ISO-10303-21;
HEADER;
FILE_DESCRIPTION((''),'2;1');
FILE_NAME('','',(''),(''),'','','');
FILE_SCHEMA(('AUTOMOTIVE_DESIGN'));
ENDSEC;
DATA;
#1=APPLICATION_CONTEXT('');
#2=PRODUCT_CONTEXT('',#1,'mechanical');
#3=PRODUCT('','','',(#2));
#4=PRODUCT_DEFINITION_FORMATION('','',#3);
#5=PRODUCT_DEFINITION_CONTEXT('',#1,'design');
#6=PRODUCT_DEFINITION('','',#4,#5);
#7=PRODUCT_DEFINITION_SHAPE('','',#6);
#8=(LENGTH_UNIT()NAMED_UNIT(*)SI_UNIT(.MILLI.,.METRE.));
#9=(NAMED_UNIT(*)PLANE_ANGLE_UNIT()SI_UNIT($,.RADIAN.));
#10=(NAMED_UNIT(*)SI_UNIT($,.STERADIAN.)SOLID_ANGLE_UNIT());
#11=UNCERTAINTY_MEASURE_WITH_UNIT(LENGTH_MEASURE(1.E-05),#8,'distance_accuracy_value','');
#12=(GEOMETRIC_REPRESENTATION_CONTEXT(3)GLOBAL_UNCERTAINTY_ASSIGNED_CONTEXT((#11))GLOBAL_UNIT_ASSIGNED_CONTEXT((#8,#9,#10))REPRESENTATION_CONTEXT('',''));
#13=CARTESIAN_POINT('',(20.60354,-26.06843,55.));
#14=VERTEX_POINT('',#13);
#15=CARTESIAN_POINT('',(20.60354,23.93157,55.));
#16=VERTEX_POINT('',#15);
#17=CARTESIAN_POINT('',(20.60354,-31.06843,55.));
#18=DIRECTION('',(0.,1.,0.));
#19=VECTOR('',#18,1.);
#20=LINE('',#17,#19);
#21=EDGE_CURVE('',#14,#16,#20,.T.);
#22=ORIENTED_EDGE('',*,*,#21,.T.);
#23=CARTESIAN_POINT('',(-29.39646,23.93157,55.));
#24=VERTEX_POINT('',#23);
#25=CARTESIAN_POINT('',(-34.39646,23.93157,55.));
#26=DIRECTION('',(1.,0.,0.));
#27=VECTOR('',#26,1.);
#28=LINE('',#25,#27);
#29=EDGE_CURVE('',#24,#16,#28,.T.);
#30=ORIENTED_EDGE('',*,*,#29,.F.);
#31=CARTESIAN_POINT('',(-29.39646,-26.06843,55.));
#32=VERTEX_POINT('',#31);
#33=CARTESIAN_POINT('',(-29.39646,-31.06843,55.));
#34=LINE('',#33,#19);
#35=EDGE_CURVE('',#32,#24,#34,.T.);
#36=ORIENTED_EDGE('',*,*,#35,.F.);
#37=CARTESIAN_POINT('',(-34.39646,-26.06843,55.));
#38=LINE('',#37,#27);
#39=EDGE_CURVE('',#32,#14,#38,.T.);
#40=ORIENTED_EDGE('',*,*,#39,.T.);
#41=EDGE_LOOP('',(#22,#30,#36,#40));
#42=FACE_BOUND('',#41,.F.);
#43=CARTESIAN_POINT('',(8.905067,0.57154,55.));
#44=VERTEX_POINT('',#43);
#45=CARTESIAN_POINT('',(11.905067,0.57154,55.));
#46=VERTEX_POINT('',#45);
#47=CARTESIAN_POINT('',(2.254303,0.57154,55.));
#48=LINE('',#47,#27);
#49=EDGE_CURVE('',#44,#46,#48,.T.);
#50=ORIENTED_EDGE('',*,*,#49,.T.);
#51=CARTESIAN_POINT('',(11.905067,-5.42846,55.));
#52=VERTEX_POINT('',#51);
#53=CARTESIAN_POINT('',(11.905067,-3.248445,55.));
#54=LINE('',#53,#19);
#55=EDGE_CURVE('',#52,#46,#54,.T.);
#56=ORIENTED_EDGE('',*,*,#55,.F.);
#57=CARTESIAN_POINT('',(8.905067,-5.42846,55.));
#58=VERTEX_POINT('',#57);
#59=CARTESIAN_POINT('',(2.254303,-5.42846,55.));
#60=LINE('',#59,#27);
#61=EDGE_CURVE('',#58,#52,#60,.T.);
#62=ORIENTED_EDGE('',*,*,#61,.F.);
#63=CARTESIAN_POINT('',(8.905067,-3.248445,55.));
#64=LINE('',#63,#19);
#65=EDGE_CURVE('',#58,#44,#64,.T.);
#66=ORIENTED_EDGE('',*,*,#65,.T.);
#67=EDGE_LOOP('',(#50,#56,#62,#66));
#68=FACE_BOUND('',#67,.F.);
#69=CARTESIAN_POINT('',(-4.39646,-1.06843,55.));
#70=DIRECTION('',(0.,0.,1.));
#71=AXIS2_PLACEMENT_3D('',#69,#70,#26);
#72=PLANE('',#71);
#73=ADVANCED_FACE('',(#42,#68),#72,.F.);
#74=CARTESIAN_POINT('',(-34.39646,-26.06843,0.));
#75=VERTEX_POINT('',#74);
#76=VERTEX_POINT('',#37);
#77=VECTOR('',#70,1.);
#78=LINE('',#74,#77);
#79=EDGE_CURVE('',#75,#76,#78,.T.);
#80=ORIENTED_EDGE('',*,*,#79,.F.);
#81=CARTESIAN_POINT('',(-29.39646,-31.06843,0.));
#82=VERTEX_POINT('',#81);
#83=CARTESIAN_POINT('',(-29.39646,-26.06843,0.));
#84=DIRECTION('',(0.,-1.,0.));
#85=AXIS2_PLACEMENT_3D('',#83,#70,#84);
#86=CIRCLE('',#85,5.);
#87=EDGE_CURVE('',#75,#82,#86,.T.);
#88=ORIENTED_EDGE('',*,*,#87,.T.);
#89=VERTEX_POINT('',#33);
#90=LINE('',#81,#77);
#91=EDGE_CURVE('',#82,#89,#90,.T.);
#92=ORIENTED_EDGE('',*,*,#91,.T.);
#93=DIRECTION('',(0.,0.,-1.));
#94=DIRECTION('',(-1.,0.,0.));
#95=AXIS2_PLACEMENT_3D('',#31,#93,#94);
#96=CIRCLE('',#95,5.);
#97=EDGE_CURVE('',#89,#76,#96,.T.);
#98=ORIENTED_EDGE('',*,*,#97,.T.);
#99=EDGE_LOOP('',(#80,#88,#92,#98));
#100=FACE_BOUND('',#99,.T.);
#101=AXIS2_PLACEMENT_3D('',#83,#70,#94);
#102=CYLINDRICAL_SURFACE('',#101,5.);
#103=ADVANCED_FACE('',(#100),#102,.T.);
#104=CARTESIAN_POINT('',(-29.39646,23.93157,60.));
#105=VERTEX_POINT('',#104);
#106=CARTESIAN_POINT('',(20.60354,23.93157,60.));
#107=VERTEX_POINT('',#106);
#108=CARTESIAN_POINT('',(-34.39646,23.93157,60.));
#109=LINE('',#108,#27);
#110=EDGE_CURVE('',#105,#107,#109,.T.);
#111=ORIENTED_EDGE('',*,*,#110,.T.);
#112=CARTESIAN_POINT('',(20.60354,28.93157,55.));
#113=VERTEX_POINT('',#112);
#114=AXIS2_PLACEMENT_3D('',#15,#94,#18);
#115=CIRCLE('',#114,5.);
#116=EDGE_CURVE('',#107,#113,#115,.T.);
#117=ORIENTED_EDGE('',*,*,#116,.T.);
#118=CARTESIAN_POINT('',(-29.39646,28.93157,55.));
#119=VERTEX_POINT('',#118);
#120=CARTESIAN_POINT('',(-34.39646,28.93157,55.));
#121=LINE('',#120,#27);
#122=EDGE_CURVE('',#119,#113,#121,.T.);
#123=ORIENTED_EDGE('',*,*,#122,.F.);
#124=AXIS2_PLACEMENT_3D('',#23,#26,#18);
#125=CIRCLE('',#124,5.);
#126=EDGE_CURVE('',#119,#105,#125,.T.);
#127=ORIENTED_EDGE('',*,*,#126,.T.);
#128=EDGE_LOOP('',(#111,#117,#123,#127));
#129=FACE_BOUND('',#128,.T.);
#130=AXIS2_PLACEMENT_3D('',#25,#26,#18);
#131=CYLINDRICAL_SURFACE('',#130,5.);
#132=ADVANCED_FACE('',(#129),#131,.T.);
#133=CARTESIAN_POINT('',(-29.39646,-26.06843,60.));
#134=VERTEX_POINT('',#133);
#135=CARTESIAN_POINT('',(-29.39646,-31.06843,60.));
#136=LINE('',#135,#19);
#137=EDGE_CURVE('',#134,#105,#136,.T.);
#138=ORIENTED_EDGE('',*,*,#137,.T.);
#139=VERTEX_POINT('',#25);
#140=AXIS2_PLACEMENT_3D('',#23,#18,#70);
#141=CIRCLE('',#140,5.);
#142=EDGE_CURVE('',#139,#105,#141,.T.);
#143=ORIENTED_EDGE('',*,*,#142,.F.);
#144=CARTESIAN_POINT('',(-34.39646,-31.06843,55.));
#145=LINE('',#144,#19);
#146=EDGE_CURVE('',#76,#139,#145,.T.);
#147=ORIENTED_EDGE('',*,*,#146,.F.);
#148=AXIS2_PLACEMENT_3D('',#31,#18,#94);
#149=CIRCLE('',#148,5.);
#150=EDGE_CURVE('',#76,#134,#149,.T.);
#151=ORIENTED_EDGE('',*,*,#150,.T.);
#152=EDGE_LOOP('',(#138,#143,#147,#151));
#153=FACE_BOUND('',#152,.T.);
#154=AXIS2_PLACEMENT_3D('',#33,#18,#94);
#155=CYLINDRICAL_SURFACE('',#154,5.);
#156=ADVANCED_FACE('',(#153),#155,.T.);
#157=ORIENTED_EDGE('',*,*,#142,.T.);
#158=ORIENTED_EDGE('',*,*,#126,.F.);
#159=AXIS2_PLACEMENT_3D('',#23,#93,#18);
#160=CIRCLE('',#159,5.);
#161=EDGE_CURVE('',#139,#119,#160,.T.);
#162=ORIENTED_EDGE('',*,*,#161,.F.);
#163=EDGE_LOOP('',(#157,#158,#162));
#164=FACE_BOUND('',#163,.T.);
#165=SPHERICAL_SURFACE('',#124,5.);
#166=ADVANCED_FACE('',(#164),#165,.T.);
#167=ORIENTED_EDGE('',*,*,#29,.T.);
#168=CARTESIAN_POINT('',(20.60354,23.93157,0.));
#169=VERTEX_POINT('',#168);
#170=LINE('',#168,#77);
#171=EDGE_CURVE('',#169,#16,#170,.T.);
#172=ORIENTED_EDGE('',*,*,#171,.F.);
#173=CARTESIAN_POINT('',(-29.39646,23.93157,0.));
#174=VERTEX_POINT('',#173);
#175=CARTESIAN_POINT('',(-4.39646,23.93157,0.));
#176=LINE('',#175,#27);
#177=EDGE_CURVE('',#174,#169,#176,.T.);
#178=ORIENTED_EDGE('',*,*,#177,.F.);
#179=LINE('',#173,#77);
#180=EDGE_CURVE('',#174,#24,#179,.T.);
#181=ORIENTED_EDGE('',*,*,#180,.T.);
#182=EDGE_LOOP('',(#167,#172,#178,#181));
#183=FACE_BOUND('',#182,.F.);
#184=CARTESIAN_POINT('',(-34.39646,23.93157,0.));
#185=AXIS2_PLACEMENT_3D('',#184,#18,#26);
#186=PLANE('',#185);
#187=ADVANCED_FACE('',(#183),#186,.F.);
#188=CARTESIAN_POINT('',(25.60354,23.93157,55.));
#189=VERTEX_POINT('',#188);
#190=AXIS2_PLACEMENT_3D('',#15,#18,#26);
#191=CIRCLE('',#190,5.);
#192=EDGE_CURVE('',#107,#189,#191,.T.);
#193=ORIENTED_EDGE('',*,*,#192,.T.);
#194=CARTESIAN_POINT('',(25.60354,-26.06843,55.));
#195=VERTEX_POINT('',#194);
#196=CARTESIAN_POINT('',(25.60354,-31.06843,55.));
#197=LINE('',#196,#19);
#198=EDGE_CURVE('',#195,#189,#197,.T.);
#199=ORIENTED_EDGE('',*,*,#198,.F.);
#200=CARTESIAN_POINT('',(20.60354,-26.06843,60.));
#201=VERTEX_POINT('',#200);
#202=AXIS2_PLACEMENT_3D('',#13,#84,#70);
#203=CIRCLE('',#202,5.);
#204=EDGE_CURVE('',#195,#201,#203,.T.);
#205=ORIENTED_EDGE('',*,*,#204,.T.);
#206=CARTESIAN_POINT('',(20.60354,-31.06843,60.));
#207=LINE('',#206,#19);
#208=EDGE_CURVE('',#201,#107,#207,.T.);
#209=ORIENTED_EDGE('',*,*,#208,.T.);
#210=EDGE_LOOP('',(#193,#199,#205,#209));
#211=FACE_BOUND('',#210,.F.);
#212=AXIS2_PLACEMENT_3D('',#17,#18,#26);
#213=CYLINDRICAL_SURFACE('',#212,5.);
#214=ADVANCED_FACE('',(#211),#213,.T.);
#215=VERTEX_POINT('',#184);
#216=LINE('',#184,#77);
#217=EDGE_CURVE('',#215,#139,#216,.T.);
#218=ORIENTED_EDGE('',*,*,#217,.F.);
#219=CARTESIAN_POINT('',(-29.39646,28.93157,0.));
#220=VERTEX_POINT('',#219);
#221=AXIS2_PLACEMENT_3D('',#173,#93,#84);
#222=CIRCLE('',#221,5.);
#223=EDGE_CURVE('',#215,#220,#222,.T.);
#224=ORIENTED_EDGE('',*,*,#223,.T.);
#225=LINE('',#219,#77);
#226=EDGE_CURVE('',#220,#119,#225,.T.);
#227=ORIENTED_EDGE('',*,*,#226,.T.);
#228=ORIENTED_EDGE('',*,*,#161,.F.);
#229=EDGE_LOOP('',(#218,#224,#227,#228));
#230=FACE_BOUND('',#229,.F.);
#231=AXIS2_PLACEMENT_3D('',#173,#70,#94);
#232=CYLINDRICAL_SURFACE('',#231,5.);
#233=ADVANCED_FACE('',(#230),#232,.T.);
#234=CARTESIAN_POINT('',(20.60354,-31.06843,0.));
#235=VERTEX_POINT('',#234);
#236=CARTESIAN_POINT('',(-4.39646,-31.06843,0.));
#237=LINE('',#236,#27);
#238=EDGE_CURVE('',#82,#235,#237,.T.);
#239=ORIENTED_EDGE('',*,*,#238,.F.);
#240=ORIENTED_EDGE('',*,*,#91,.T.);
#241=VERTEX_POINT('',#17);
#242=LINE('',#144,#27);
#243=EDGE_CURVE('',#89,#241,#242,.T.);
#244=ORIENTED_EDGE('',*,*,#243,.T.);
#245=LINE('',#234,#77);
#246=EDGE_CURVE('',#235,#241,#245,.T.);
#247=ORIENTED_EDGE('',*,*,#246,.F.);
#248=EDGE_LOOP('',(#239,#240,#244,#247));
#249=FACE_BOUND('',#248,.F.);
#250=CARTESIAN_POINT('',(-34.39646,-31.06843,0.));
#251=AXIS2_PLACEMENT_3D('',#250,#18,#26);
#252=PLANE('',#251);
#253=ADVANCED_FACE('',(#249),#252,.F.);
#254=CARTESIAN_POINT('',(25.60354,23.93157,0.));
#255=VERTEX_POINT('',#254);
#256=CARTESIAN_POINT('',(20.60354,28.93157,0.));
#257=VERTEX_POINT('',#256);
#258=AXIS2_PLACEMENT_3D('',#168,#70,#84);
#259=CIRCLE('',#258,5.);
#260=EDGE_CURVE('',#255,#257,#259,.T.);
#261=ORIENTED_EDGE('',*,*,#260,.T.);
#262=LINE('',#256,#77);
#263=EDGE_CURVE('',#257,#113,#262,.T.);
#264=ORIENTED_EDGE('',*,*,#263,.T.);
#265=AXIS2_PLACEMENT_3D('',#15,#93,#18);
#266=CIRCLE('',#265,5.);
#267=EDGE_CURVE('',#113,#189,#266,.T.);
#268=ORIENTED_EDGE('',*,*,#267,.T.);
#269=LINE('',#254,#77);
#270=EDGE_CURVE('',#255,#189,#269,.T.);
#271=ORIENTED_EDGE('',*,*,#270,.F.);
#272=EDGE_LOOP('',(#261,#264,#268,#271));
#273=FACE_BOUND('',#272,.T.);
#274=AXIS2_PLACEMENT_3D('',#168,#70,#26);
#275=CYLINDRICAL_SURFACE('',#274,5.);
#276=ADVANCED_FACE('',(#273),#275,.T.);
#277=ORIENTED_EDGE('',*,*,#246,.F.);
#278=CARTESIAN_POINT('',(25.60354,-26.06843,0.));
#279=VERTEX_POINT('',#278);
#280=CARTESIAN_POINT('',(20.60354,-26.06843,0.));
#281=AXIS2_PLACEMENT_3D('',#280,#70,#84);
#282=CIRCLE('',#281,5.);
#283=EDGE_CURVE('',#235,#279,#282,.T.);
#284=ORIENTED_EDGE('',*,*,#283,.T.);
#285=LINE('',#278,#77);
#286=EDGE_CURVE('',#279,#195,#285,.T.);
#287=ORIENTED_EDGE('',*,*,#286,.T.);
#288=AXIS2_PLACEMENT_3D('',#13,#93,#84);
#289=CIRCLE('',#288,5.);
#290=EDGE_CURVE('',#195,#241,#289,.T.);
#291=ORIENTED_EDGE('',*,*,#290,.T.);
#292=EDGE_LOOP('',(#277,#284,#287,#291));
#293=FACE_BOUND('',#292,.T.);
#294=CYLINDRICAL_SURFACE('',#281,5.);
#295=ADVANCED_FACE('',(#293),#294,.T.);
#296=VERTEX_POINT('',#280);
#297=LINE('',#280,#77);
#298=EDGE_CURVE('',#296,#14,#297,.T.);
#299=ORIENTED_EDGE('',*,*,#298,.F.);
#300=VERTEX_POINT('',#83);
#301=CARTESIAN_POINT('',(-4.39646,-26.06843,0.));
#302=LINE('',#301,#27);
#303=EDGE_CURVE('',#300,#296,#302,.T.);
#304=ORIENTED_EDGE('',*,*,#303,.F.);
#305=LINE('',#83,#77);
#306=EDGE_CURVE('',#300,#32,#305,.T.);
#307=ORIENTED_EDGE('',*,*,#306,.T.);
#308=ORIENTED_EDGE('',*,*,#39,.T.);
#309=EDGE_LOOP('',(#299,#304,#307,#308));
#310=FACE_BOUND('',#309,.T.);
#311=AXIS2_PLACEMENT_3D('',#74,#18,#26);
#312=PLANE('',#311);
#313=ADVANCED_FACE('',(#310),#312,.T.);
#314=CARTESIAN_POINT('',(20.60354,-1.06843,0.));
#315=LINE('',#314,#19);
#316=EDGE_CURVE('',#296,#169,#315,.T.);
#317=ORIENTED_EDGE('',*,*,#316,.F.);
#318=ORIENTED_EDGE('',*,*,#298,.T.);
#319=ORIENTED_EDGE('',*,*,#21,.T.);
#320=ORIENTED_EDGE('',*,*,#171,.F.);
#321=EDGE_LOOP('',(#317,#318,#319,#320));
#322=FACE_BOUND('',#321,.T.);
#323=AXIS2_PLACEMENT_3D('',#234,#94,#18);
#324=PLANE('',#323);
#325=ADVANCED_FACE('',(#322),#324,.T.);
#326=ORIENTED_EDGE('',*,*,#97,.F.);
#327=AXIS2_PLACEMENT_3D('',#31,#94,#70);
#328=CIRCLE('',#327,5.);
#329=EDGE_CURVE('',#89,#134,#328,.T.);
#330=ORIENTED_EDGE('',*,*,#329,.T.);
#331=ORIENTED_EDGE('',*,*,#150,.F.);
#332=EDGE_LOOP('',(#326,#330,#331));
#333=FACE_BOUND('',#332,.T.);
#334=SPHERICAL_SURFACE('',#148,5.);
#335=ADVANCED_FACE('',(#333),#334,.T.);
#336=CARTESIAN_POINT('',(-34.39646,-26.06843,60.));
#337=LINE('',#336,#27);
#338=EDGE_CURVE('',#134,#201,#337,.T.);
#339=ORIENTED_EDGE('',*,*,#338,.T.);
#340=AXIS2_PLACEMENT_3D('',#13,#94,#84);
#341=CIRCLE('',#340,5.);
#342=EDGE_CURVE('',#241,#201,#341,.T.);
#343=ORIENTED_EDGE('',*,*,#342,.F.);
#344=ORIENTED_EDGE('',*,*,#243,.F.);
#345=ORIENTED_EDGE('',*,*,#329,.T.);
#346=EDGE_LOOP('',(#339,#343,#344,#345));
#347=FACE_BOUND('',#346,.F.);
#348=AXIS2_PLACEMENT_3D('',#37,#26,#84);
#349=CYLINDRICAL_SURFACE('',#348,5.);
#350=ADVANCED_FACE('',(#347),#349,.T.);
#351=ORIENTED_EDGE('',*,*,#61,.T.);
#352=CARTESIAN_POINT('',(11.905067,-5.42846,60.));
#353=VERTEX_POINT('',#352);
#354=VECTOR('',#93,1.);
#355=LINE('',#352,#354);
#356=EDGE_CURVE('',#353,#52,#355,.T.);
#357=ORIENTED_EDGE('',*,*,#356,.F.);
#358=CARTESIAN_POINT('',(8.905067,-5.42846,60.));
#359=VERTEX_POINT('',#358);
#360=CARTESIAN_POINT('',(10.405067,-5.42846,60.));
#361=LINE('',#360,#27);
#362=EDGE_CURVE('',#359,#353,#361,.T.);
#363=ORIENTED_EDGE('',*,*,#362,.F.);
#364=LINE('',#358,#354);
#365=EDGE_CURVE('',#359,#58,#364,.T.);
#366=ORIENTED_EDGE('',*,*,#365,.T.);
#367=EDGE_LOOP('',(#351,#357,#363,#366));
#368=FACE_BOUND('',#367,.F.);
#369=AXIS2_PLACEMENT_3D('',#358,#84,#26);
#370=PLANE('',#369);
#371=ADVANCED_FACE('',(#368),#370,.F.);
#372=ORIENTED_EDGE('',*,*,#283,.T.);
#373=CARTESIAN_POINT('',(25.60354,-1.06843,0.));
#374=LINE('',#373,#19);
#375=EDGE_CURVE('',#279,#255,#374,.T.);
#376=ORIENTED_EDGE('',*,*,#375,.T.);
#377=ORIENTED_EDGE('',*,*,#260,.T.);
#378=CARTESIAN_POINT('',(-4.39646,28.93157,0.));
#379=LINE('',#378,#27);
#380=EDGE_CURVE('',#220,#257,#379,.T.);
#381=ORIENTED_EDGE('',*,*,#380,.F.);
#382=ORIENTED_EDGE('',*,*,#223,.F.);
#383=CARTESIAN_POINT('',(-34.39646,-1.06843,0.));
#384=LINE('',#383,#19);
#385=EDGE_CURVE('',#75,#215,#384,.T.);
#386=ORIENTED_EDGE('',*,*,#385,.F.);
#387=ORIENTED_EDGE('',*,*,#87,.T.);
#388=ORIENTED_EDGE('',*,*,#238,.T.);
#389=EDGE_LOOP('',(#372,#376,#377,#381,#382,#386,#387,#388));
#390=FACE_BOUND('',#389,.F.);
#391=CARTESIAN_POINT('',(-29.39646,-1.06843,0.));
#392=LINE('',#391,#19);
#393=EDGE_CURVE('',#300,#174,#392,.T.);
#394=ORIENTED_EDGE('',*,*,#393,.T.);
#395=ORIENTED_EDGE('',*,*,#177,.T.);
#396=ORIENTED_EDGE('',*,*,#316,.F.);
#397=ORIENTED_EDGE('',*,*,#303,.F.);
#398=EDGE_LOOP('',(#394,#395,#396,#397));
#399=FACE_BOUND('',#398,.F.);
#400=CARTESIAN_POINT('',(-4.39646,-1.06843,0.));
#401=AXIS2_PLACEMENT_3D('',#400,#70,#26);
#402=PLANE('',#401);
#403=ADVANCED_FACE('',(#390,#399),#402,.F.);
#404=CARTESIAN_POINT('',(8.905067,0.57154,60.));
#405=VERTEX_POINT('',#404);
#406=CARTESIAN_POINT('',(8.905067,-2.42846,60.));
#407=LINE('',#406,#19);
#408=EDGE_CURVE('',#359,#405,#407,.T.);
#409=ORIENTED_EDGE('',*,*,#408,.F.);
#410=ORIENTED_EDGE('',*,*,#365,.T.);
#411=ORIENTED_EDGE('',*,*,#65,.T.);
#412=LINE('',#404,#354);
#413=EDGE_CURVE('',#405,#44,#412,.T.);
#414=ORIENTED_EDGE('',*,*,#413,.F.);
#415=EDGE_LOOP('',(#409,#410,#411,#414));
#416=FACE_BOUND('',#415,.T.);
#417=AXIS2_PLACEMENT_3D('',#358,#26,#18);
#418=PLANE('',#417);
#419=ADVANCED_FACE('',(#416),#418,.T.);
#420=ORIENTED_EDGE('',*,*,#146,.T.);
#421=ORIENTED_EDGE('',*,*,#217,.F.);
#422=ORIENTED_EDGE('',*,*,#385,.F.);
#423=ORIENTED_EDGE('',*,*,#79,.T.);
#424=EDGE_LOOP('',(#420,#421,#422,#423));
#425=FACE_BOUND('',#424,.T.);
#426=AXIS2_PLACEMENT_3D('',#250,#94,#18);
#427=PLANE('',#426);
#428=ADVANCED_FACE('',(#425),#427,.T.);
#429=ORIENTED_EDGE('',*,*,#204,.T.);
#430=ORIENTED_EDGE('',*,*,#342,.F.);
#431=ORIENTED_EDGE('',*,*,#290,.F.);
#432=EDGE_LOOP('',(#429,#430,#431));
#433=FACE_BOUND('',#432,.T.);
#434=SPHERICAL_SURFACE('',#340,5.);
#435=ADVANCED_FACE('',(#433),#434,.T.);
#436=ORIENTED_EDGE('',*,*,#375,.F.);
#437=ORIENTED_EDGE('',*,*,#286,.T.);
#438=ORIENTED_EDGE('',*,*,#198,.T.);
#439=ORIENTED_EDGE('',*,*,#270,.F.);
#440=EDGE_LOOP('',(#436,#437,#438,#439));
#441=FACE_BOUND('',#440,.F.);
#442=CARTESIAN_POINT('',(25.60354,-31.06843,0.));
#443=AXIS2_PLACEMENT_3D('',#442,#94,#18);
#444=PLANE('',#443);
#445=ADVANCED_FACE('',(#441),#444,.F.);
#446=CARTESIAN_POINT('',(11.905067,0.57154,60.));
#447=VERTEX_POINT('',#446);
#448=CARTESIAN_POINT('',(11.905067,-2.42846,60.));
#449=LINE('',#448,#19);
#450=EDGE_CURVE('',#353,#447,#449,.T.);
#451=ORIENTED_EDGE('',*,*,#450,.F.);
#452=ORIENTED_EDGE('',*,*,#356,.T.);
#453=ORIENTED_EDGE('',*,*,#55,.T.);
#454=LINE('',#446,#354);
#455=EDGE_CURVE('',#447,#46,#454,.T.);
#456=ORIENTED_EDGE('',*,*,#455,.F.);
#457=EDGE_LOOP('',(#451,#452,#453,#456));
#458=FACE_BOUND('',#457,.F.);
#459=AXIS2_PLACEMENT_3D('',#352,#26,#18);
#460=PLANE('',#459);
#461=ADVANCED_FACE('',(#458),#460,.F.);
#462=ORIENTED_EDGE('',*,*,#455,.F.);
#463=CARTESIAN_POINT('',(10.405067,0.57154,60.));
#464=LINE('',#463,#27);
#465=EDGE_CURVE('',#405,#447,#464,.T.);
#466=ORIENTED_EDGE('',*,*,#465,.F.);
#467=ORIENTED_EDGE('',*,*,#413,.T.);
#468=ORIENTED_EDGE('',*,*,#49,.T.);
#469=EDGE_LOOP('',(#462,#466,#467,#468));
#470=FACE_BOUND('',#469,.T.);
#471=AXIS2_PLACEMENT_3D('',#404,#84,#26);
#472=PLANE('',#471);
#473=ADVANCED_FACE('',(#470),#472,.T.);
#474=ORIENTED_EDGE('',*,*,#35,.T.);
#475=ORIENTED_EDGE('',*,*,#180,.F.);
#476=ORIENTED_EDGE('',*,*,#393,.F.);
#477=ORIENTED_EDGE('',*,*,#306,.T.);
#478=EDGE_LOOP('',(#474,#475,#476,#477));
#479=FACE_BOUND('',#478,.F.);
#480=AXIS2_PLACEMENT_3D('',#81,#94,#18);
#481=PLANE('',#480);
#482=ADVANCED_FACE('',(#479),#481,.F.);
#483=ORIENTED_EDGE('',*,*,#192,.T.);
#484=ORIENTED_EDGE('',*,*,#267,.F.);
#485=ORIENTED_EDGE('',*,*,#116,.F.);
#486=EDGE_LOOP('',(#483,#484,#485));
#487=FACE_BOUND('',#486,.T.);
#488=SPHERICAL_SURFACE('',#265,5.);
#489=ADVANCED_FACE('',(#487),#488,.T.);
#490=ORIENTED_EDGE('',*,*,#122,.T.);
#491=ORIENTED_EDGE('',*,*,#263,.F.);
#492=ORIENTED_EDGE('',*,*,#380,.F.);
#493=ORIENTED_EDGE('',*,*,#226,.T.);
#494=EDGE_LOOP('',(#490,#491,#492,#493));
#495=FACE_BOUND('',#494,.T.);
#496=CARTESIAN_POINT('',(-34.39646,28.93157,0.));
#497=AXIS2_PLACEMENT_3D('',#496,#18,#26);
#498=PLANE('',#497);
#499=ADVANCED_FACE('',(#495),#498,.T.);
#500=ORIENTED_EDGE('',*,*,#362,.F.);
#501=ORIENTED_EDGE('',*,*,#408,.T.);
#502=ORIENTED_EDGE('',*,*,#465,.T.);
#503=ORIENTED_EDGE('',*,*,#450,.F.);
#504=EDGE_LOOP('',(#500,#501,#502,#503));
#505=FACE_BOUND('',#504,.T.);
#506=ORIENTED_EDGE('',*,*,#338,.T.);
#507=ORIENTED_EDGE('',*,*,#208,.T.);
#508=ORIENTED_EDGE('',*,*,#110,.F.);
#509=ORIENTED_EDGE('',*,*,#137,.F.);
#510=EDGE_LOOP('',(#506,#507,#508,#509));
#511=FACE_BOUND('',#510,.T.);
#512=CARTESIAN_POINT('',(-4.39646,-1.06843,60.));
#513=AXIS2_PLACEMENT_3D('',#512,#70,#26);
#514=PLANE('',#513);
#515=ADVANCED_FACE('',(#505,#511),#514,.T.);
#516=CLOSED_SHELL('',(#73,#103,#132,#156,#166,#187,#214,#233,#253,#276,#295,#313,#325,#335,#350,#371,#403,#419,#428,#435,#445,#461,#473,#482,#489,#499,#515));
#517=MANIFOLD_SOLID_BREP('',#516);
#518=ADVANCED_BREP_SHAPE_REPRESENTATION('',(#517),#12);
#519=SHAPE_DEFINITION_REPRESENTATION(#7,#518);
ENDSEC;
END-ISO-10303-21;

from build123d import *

# Parameters (mm, degrees)
F0_W     = 60
F0_H     = 60
F1_DEPTH = 60
F2_R     = 5
F3_T     = 5
F4_W     = 3
F4_H     = 6
F5_DEPTH = 25


# Not quite as in the source:
# - a shell that OpenCascade refuses in one call is made with other operations: the cavity is built on its own and cut out


with BuildPart() as f1:
    # F0 (on Top) → F1 (new body)
    with BuildSketch(Plane.XY):
        with Locations((-4.3964601223, -1.0684304871)):
            Rectangle(F0_W, F0_H)
    extrude(amount=F1_DEPTH)

    # F2
    f2_edges = [f1.edges().sort_by_distance(p)[0] for p in [
        (25.60354, 28.93157, 30),
        (-4.39646, 28.93157, 60),
        (-34.39646, 28.93157, 30),
        (-34.39646, -1.06843, 60),
        (-34.39646, -31.06843, 30),
        (-4.39646, -31.06843, 60),
        (25.60354, -31.06843, 30),
        (25.60354, -1.06843, 60),
    ]]
    fillet(f2_edges, radius=F2_R)

    # F3: shell of thickness 5, made by hand


with BuildPart() as f3_core1:
    # F3_t2: copy of F1
    add(f1.part)

    # the walls: a layer under each face that stays
    f3_faces = [f3_core1.faces().sort_by_distance(p)[0] for p in [
        (-4.3964601223, 28.9315695129, 27.5),
        (25.6035398777, -1.0684304871, 27.5),
        (-34.3964601223, -1.0684304871, 27.5),
        (-4.3964601223, -31.0684304871, 27.5),
        (-4.3964601223, -1.0684304871, 60),
    ]]
    thicken(f3_faces, amount=-F3_T, mode=Mode.SUBTRACT)


with BuildPart() as f1_1:
    add(f1.part)

    # what is left inside the walls is the cavity
    f3_cavity = [f3_core1.part.solids().sort_by_distance(p)[0] for p in [
        (20.55354, -1.06843, 36.666667),
    ]]
    add(f3_cavity, mode=Mode.SUBTRACT)

    # F4 (on face) → F5 (cut)
    with BuildSketch(Plane.XY.offset(60)):
        with Locations((10.4050671086, -2.4284604266)):
            Rectangle(F4_W, F4_H)
    extrude(amount=-F5_DEPTH, mode=Mode.SUBTRACT)


solid = f1_1.part
